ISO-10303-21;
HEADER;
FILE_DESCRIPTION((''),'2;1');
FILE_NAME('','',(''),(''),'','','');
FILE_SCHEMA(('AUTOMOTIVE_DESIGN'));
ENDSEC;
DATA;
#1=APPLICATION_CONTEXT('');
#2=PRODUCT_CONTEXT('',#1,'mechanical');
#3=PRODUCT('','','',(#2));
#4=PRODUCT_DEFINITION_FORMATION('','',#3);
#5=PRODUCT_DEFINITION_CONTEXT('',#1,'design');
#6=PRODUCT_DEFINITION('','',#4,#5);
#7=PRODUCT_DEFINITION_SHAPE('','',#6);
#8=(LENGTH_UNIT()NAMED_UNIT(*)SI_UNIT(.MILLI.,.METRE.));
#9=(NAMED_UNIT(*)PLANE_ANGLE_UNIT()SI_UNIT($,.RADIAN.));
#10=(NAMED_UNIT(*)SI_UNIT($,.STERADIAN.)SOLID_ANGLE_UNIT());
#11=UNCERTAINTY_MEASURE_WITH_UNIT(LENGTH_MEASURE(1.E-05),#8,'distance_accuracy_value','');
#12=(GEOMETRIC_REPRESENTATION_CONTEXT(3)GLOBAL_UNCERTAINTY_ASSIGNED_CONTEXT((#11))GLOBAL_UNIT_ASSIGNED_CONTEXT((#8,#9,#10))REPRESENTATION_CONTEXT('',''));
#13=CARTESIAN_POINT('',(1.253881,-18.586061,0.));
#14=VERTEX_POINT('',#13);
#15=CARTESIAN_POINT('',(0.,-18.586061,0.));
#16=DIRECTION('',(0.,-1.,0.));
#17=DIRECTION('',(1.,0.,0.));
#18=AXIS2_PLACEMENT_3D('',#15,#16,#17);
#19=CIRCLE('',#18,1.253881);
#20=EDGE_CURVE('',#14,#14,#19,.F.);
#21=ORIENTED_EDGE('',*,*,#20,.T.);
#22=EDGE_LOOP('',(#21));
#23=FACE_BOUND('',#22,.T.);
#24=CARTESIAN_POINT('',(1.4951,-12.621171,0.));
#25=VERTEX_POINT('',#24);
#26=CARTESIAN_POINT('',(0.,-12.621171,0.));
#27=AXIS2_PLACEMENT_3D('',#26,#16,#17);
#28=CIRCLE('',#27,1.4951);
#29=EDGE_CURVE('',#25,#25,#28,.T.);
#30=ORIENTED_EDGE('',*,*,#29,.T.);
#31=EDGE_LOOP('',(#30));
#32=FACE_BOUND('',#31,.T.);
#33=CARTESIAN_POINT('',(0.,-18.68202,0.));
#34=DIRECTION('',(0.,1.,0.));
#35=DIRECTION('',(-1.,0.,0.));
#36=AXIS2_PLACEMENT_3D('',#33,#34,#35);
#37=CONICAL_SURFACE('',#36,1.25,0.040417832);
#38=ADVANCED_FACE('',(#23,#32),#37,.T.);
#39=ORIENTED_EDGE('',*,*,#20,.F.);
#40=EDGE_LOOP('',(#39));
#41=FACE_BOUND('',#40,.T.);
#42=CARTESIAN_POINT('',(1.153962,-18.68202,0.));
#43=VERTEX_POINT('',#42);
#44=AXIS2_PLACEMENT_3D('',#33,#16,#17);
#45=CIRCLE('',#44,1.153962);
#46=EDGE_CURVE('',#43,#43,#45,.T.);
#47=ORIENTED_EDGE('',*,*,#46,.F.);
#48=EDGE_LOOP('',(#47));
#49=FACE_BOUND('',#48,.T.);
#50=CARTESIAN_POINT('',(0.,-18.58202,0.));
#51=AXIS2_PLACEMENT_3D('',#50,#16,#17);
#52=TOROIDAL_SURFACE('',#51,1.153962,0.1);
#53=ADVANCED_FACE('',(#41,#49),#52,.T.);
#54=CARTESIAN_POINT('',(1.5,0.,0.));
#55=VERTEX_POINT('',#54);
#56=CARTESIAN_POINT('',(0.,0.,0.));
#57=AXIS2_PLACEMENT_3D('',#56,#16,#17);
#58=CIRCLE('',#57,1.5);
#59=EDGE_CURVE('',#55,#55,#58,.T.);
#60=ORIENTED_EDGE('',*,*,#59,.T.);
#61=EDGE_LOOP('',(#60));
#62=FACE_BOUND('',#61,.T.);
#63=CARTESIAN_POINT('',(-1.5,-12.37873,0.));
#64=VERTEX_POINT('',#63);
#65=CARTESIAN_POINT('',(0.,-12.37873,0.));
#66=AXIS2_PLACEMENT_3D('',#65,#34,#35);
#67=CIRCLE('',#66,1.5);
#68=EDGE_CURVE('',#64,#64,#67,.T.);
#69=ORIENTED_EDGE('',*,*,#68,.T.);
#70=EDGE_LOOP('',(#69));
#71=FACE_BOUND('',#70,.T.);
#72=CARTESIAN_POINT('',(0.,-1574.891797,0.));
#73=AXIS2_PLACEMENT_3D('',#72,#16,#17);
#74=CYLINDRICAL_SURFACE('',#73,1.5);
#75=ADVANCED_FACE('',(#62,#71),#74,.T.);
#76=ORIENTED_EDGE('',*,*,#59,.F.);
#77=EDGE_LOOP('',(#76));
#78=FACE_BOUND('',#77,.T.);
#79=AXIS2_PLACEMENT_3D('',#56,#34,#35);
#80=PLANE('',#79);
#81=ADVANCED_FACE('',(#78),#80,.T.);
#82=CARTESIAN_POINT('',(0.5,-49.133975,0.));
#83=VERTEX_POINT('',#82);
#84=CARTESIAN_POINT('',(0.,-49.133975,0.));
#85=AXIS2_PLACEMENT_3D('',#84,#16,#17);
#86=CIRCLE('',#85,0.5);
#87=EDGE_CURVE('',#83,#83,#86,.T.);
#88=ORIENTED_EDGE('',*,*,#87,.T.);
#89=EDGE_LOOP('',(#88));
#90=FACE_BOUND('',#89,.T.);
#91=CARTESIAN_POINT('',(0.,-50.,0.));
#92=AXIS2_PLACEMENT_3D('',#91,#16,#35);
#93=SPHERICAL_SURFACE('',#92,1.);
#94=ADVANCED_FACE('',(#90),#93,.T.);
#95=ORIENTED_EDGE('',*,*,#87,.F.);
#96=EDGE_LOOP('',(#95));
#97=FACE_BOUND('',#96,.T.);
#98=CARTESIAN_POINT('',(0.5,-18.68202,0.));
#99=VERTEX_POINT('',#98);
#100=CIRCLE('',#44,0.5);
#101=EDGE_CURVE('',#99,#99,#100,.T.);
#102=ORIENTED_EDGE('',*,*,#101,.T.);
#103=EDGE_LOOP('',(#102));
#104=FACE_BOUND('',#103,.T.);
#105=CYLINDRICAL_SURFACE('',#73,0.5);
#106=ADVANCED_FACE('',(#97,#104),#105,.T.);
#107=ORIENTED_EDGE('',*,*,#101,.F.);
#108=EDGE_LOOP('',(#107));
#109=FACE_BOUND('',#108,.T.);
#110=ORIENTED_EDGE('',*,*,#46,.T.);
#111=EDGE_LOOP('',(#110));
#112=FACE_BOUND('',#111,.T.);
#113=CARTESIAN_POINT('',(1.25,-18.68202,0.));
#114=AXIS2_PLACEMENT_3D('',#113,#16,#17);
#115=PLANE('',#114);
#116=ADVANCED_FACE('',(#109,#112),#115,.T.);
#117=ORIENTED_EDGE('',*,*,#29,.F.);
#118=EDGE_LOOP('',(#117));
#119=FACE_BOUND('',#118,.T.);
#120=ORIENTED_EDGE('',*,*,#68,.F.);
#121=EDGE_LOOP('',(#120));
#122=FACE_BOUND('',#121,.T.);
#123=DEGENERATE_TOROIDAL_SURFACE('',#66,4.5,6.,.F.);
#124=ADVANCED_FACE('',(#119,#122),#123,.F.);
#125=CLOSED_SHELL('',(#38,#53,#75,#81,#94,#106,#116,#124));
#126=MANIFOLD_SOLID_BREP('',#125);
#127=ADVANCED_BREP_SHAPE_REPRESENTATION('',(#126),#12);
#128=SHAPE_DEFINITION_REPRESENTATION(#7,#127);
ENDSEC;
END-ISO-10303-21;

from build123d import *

# Parameters (mm, degrees)
FILLET1_R = 0.1
FILLET2_R = 6


with BuildPart() as part:
    # Sketch1 → Revolve1 (revolve)
    with BuildSketch(Plane.XY):
        with BuildLine():
            Line((0, 0), (1.5, 0))
            Line((1.5, 0), (1.5, -12.5))
            Line((1.5, -12.5), (1.25, -18.682020119))
            Line((1.25, -18.682020119), (0.5, -18.682020119))
            Line((0.5, -18.682020119), (0.5, -49.133974596))
            ThreePointArc((0.5, -49.133974596), (0.965925826, -50.258819045), (0, -51))
            Line((0, -51), (0, 0))
        make_face()
    revolve(axis=Axis((0, -1574.891797032, 0), (0, 1, 0)))

    # Fillet1
    fillet1_edges = [part.edges().sort_by_distance(p)[0] for p in [
        (-1.25, -18.682020119, 0),
    ]]
    fillet(fillet1_edges, radius=FILLET1_R)

    # Fillet2
    # the kernel refuses this fillet: 6 mm, written as the material it takes off along each edge
    with BuildSketch(Plane(origin=(0, -12.5, 0), x_dir=(1, 0, 0), z_dir=(0, 0, 1))) as fillet2_piece_1:
        with BuildLine():
            CenterArc((1.5 - FILLET2_R, FILLET2_R * 0.0202116676517), FILLET2_R, 357.684228799, 2.315771201)
            Line((1.5, FILLET2_R * 0.0202116676517), (1.5, 0))
            Line((1.5, 0), (1.5 - FILLET2_R * 0.000816689391513, -FILLET2_R * 0.0201951609972))
        make_face()
    revolve(axis=Axis((0, -12.5, 0), (0, 1, 0)), mode=Mode.SUBTRACT)


solid = part.part
